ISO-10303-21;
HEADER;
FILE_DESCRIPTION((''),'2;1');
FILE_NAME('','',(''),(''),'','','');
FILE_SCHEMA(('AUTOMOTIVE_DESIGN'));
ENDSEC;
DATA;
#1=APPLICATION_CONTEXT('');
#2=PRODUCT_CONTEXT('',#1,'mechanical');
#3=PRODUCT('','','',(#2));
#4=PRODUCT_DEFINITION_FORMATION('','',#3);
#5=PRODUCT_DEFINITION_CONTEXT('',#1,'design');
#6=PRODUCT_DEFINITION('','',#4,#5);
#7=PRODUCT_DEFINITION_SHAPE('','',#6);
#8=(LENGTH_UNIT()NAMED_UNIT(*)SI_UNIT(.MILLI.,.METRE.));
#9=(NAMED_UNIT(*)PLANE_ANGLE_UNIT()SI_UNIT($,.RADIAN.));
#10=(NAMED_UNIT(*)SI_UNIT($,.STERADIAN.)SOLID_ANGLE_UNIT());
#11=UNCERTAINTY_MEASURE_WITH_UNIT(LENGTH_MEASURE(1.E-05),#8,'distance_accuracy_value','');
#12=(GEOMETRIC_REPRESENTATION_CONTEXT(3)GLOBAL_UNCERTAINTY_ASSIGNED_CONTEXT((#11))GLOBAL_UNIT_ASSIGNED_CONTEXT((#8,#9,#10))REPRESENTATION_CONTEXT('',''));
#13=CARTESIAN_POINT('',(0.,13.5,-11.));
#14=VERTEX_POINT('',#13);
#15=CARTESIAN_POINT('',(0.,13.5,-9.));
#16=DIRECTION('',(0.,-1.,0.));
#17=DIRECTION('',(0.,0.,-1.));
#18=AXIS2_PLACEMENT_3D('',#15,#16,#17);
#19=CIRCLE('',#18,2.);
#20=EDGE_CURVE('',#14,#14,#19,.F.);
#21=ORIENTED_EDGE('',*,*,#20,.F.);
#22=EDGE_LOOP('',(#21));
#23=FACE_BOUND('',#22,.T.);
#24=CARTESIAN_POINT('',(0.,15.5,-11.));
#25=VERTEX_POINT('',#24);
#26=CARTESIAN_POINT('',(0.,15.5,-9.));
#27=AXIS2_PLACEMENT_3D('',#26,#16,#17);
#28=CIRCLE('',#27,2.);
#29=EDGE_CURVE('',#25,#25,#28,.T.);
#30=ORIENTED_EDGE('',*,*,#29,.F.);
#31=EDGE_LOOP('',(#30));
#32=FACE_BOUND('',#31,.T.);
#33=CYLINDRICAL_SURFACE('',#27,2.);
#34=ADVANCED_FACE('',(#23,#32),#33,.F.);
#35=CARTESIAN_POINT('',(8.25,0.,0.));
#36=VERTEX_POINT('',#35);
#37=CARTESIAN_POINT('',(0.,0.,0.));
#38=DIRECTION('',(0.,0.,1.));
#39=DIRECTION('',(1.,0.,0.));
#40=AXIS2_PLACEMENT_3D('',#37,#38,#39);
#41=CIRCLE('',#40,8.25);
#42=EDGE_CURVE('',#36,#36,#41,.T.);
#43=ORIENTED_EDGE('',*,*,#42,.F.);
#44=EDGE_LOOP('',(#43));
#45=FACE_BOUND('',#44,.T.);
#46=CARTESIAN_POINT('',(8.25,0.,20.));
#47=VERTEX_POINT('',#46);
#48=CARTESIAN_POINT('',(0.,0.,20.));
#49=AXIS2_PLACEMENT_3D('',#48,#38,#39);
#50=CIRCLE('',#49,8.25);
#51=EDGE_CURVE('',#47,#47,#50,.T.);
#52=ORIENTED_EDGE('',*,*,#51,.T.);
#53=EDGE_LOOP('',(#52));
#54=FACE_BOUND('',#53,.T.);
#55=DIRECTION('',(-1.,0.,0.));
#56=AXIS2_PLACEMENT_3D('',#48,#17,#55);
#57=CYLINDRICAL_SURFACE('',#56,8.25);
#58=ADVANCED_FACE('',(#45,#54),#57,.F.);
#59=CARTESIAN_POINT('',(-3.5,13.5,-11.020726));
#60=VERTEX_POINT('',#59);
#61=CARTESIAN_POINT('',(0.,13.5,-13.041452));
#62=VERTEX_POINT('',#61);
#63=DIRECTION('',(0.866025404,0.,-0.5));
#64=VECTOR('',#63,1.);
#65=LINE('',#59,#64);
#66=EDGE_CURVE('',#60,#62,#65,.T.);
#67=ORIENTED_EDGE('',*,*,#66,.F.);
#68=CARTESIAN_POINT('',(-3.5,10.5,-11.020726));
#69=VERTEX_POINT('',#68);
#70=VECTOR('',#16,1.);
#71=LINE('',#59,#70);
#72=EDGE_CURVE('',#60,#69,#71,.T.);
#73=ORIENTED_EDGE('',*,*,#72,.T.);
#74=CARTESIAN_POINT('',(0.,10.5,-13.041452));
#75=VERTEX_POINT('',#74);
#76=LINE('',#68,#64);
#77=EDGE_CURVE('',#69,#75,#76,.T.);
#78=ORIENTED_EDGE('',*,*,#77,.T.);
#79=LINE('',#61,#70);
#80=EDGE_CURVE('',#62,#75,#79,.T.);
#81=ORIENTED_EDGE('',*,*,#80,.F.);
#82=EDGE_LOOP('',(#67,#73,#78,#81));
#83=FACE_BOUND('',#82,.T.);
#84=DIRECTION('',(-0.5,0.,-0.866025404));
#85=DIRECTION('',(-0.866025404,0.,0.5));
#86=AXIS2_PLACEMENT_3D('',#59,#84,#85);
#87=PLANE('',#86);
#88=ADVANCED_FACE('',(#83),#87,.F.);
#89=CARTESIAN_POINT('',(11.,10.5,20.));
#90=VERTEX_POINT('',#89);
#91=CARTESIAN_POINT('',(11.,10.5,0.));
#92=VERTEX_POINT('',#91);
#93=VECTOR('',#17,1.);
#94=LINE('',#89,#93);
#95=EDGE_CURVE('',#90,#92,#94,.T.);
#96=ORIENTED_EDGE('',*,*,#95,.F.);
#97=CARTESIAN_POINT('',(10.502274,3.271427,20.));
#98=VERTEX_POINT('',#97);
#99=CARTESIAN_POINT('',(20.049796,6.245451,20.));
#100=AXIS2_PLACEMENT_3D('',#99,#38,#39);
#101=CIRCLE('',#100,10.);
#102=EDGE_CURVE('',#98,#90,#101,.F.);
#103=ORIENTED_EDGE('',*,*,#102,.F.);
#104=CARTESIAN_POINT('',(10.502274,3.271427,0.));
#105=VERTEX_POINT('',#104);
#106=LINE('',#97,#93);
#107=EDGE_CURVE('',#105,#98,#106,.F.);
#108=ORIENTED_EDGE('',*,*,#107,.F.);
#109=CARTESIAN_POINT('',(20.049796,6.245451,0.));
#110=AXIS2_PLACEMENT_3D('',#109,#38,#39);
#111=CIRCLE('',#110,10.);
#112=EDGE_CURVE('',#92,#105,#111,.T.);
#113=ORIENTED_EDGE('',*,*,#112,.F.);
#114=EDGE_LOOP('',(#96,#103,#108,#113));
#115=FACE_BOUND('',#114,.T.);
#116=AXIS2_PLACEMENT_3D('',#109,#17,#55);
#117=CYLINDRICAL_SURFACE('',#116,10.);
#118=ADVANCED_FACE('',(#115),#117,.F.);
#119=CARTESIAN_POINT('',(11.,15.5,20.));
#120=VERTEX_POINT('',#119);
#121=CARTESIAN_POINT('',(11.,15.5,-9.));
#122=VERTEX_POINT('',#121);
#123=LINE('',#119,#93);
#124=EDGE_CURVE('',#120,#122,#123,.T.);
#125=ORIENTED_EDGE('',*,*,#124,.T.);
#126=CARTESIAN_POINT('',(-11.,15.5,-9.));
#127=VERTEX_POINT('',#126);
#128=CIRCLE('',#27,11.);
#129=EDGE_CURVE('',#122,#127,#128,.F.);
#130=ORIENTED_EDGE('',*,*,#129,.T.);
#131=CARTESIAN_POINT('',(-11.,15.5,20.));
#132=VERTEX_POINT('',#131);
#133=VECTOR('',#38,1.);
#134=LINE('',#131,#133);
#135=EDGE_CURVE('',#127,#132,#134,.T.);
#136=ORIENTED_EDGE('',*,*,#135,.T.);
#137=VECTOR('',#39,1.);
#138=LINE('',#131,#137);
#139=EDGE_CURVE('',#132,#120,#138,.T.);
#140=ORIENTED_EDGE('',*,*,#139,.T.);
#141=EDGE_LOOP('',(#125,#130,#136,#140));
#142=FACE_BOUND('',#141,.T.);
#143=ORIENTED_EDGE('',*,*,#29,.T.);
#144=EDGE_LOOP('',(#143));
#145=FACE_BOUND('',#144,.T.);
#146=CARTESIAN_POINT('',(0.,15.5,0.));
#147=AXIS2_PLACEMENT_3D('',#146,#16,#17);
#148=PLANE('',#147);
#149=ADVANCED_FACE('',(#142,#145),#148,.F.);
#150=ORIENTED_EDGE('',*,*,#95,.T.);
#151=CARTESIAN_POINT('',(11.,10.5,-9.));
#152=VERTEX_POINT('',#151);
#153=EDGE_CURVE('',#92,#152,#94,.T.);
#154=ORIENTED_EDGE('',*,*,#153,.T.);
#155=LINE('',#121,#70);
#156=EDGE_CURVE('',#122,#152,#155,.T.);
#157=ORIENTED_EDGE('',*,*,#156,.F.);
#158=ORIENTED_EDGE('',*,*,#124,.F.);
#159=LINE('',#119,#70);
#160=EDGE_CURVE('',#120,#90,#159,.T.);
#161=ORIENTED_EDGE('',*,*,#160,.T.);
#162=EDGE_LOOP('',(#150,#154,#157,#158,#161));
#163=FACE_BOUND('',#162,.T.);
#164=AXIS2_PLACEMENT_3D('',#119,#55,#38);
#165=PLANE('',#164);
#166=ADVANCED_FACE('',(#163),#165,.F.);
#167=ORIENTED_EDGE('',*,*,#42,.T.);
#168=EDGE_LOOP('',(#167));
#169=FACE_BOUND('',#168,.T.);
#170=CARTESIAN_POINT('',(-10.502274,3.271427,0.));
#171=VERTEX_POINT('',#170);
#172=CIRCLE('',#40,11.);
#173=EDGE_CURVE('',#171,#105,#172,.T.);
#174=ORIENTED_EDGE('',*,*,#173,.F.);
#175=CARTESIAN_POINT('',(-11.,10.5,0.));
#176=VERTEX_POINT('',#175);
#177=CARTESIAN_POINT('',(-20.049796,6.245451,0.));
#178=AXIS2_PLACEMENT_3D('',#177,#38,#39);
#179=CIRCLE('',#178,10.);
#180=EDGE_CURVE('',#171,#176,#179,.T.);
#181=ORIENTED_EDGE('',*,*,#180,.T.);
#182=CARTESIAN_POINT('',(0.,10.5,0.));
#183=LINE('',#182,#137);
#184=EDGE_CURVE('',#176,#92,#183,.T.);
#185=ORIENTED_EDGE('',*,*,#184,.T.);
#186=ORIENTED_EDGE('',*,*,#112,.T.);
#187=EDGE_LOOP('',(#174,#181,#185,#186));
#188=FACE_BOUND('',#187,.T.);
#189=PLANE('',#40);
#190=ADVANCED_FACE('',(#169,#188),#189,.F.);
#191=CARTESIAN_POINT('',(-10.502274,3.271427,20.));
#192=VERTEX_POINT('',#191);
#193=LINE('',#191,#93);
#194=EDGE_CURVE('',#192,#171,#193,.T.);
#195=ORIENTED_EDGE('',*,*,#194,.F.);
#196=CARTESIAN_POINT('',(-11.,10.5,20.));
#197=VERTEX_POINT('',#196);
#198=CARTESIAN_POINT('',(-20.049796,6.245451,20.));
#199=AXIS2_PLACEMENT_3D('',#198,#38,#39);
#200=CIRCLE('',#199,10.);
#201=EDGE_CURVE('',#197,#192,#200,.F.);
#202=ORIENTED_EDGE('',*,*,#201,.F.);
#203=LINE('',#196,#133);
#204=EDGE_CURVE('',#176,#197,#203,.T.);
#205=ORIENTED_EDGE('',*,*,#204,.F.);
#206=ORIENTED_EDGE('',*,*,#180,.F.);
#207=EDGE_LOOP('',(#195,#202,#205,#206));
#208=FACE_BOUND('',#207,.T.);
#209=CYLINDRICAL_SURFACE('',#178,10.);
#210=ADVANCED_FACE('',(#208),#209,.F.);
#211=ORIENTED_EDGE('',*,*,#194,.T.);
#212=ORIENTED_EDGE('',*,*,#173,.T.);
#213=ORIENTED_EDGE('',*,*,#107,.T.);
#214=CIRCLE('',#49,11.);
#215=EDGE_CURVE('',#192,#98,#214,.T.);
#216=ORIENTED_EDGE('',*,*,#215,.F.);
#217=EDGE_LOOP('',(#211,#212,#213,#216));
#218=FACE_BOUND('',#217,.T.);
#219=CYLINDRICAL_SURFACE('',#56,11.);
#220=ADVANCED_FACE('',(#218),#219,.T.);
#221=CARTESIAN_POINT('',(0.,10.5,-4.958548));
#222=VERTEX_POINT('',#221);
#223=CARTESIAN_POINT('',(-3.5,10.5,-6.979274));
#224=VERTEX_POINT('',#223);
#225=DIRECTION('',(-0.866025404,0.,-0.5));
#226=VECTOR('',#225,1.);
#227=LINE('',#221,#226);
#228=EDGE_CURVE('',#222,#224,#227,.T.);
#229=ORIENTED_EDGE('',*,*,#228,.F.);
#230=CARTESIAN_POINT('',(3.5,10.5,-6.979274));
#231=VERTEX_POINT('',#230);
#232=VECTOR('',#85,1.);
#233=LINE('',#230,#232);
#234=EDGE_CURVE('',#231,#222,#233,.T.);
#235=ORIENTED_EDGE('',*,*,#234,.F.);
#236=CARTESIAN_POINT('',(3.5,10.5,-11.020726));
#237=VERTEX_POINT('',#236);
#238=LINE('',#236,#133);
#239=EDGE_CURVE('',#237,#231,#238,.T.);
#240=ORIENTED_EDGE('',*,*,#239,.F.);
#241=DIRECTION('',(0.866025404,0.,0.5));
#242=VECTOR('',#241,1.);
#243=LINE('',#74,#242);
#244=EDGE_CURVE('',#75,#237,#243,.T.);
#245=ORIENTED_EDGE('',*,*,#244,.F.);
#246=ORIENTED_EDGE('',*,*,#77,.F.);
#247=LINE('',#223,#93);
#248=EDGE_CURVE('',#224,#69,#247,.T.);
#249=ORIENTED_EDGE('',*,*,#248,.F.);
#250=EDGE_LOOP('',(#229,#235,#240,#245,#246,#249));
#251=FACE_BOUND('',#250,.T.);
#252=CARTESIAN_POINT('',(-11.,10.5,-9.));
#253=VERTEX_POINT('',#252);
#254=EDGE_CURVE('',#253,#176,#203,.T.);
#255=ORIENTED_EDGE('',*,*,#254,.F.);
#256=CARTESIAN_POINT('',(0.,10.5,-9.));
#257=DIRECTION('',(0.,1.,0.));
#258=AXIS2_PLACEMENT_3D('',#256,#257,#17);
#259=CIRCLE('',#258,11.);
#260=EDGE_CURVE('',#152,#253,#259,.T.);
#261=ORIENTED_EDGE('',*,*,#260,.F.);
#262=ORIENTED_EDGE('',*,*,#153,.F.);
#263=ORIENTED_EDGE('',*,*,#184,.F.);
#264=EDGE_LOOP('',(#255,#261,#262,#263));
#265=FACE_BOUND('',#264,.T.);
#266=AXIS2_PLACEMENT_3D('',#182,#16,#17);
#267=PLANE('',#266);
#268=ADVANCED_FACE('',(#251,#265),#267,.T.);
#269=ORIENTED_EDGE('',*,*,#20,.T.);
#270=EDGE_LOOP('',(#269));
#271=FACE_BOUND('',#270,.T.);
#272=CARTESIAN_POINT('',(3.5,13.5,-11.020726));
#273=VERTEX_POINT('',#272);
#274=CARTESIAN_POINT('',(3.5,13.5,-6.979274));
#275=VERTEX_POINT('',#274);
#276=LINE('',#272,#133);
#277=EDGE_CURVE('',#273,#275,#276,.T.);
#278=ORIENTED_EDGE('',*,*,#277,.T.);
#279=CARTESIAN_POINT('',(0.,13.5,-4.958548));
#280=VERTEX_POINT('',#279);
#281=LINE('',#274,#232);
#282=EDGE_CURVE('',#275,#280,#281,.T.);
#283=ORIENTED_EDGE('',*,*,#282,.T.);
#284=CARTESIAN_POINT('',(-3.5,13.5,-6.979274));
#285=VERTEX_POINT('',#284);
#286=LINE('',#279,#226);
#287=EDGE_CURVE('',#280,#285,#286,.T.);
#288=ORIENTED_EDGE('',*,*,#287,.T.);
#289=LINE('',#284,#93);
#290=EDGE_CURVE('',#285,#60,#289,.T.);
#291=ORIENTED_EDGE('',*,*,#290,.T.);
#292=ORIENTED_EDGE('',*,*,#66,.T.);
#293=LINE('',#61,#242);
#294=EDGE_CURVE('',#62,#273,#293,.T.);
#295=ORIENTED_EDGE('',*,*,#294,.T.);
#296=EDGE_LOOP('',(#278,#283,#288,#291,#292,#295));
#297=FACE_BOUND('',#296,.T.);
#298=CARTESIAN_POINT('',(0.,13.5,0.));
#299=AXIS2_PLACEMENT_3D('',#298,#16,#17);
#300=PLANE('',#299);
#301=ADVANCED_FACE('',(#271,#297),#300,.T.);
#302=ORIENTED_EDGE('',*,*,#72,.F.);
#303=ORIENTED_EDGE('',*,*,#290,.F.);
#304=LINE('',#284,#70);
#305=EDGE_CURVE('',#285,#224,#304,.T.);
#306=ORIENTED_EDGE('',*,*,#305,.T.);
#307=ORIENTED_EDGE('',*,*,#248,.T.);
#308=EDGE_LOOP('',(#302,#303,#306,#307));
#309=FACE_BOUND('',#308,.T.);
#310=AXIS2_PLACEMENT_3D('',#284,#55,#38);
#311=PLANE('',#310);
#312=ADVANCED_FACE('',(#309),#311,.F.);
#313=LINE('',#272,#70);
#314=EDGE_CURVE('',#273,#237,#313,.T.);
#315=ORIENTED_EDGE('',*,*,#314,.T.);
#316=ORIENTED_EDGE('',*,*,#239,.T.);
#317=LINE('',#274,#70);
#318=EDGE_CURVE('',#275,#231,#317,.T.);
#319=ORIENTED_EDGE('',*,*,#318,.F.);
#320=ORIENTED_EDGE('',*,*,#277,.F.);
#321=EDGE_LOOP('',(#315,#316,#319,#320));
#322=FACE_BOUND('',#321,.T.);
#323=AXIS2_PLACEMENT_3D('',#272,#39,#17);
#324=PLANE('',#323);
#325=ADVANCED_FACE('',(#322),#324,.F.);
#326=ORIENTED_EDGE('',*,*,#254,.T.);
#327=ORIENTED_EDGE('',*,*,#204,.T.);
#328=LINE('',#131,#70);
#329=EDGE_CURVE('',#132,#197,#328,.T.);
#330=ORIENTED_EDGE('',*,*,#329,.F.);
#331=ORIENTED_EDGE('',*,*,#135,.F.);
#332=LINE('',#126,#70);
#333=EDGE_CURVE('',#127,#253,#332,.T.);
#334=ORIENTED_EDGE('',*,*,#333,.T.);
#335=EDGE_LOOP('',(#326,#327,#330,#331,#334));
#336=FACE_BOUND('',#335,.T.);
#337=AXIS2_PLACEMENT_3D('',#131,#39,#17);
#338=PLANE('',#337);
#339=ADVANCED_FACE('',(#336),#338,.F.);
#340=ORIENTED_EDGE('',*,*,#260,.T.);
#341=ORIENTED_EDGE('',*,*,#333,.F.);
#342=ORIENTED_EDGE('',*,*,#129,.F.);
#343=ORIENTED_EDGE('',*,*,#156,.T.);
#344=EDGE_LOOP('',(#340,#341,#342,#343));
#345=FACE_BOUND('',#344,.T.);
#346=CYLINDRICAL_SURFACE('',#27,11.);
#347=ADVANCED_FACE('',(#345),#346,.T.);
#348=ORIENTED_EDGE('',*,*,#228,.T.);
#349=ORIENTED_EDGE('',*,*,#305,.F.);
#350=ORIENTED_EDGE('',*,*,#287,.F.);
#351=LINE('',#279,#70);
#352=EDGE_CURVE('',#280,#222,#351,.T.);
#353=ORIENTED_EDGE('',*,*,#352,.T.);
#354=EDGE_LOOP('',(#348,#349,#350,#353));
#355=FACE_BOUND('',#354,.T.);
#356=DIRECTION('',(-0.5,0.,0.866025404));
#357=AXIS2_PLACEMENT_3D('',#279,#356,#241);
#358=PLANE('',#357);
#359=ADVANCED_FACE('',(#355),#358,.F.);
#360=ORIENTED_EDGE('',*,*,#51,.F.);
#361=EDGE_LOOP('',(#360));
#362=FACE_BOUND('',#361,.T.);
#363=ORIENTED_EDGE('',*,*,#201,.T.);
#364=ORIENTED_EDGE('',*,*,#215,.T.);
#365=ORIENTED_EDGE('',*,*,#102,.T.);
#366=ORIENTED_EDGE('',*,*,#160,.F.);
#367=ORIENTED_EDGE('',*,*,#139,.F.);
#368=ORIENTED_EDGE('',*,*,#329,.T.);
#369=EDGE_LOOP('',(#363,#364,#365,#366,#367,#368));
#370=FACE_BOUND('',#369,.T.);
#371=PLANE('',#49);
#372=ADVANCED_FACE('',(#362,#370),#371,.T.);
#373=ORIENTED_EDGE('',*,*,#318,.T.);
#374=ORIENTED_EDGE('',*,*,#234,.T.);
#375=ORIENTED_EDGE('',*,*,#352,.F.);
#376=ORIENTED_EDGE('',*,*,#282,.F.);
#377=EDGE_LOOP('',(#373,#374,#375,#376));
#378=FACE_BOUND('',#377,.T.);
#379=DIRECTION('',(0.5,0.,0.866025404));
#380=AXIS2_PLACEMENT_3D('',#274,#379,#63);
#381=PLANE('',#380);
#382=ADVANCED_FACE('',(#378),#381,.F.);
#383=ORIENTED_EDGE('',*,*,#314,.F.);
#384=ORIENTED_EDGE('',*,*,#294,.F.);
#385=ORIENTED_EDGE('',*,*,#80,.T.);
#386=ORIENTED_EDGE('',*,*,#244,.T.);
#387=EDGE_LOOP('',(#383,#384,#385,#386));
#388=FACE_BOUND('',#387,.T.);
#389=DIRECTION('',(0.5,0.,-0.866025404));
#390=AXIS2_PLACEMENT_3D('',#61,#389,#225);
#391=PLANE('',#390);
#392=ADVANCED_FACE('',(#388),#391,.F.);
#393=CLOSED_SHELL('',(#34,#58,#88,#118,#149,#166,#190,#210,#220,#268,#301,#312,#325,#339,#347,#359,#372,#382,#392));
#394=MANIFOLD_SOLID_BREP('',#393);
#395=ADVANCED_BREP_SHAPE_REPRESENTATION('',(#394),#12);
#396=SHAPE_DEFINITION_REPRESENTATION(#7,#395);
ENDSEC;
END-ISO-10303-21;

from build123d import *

# Parameters (mm, degrees)
SKETCH1_R               = 11
SKETCH1_R_2             = 8.25
BOSS_EXTRUDE1_DEPTH     = 20
BOSS_EXTRUDE2_START     = 10.5
SKETCH2_W               = 22
SKETCH2_H               = 40
BOSS_EXTRUDE2_DEPTH     = 5
FILLET1_R               = 10
CUT_EXTRUDE1_DEPTH      = 32.356817441
CUT_EXTRUDE1_DEPTH_BACK = 32.356817441
SKETCH3_R               = 2
CUT_EXTRUDE2_DEPTH      = 3


with BuildPart() as part:
    # Sketch1 → Boss-Extrude1 (new body)
    with BuildSketch(Plane.XY):
        Circle(SKETCH1_R)
        Circle(SKETCH1_R_2, mode=Mode.SUBTRACT)
    extrude(amount=BOSS_EXTRUDE1_DEPTH)

    # Sketch2 → Boss-Extrude2 (add)
    with BuildSketch(Plane(origin=(0, 0, 0), x_dir=(1, 0, 0), z_dir=(0, 1, 0)).offset(BOSS_EXTRUDE2_START)):
        Rectangle(SKETCH2_W, SKETCH2_H)
    extrude(amount=BOSS_EXTRUDE2_DEPTH)

    # Fillet1
    # the kernel refuses this fillet: 10 mm, written as the material it adds along each edge
    with BuildSketch(Plane(origin=(-3.278719262, 10.5, 20), x_dir=(-0.7068612183411899, -0.7073522587828561, 0), z_dir=(0, 0, -1))) as fillet1_piece_1:
        with BuildLine():
            CenterArc((14.864288654, 8.855683881), FILLET1_R, 199.840435799, 42.481112875)
            Line((5.45787391, 5.461665371), (5.269745615, 5.393785))
            ThreePointArc((5.269745615, 5.393785), (2.587466503, 2.872204929), (-0.141470452, 0.141372244))
            Line((-0.141470452, 0.141372244), (0.092901804, -0.177113678))
            ThreePointArc((0.092901804, -0.177113678), (5.109599225, 1.058747731), (10.126296646, -0.177113678))
            Line((10.126296646, -0.177113678), (10.21919845, 0))
        make_face()
    extrude(amount=20)
    with BuildSketch(Plane(origin=(3.278719262, 10.5, 20), x_dir=(0.7068612183411898, -0.7073522587828562, 0), z_dir=(0, 0, -1))) as fillet1_piece_2:
        with BuildLine():
            CenterArc((14.864288654, -8.855683881), FILLET1_R, 117.678451325, 42.481112875)
            Line((5.45787391, -5.461665371), (5.269745615, -5.393785))
            ThreePointArc((5.269745615, -5.393785), (2.587466503, -2.872204929), (-0.141470452, -0.141372244))
            Line((-0.141470452, -0.141372244), (0.092901804, 0.177113678))
            ThreePointArc((0.092901804, 0.177113678), (5.109599225, -1.058747731), (10.126296646, 0.177113678))
            Line((10.126296646, 0.177113678), (10.21919845, 0))
        make_face()
    extrude(amount=20)

    # Sketch3 → Cut-Extrude1 (cut, two sides: drawn at the far end of the back side and taken through both)
    with BuildSketch(Plane.XZ.offset(-10.5).offset(-CUT_EXTRUDE1_DEPTH_BACK)):
        with Locations(Location((0, -9, 0), (0, 0, 270))):
            Circle(SKETCH3_R)
        with BuildLine():
            Line((-11, -9), (-17.508128505, -13.92083612))
            Line((-17.508128505, -13.92083612), (-14.254064253, -21.523754309))
            Line((-14.254064253, -21.523754309), (21.256045922, -20))
            Line((21.256045922, -20), (18.95789911, -14.630523296))
            Line((18.95789911, -14.630523296), (11, -9))
            ThreePointArc((11, -9), (0, -20), (-11, -9))
        make_face()
    extrude(amount=CUT_EXTRUDE1_DEPTH + CUT_EXTRUDE1_DEPTH_BACK, mode=Mode.SUBTRACT)

    # Sketch4 → Cut-Extrude2 (cut)
    with BuildSketch(Plane.XZ.offset(-10.5)):
        Polygon((3.5, -6.979274058), (0, -4.958548116), (-3.5, -6.979274058), (-3.5, -11.020725942), (0, -13.041451884), (3.5, -11.020725942), align=None)
    extrude(amount=-CUT_EXTRUDE2_DEPTH, mode=Mode.SUBTRACT)


solid = part.part
